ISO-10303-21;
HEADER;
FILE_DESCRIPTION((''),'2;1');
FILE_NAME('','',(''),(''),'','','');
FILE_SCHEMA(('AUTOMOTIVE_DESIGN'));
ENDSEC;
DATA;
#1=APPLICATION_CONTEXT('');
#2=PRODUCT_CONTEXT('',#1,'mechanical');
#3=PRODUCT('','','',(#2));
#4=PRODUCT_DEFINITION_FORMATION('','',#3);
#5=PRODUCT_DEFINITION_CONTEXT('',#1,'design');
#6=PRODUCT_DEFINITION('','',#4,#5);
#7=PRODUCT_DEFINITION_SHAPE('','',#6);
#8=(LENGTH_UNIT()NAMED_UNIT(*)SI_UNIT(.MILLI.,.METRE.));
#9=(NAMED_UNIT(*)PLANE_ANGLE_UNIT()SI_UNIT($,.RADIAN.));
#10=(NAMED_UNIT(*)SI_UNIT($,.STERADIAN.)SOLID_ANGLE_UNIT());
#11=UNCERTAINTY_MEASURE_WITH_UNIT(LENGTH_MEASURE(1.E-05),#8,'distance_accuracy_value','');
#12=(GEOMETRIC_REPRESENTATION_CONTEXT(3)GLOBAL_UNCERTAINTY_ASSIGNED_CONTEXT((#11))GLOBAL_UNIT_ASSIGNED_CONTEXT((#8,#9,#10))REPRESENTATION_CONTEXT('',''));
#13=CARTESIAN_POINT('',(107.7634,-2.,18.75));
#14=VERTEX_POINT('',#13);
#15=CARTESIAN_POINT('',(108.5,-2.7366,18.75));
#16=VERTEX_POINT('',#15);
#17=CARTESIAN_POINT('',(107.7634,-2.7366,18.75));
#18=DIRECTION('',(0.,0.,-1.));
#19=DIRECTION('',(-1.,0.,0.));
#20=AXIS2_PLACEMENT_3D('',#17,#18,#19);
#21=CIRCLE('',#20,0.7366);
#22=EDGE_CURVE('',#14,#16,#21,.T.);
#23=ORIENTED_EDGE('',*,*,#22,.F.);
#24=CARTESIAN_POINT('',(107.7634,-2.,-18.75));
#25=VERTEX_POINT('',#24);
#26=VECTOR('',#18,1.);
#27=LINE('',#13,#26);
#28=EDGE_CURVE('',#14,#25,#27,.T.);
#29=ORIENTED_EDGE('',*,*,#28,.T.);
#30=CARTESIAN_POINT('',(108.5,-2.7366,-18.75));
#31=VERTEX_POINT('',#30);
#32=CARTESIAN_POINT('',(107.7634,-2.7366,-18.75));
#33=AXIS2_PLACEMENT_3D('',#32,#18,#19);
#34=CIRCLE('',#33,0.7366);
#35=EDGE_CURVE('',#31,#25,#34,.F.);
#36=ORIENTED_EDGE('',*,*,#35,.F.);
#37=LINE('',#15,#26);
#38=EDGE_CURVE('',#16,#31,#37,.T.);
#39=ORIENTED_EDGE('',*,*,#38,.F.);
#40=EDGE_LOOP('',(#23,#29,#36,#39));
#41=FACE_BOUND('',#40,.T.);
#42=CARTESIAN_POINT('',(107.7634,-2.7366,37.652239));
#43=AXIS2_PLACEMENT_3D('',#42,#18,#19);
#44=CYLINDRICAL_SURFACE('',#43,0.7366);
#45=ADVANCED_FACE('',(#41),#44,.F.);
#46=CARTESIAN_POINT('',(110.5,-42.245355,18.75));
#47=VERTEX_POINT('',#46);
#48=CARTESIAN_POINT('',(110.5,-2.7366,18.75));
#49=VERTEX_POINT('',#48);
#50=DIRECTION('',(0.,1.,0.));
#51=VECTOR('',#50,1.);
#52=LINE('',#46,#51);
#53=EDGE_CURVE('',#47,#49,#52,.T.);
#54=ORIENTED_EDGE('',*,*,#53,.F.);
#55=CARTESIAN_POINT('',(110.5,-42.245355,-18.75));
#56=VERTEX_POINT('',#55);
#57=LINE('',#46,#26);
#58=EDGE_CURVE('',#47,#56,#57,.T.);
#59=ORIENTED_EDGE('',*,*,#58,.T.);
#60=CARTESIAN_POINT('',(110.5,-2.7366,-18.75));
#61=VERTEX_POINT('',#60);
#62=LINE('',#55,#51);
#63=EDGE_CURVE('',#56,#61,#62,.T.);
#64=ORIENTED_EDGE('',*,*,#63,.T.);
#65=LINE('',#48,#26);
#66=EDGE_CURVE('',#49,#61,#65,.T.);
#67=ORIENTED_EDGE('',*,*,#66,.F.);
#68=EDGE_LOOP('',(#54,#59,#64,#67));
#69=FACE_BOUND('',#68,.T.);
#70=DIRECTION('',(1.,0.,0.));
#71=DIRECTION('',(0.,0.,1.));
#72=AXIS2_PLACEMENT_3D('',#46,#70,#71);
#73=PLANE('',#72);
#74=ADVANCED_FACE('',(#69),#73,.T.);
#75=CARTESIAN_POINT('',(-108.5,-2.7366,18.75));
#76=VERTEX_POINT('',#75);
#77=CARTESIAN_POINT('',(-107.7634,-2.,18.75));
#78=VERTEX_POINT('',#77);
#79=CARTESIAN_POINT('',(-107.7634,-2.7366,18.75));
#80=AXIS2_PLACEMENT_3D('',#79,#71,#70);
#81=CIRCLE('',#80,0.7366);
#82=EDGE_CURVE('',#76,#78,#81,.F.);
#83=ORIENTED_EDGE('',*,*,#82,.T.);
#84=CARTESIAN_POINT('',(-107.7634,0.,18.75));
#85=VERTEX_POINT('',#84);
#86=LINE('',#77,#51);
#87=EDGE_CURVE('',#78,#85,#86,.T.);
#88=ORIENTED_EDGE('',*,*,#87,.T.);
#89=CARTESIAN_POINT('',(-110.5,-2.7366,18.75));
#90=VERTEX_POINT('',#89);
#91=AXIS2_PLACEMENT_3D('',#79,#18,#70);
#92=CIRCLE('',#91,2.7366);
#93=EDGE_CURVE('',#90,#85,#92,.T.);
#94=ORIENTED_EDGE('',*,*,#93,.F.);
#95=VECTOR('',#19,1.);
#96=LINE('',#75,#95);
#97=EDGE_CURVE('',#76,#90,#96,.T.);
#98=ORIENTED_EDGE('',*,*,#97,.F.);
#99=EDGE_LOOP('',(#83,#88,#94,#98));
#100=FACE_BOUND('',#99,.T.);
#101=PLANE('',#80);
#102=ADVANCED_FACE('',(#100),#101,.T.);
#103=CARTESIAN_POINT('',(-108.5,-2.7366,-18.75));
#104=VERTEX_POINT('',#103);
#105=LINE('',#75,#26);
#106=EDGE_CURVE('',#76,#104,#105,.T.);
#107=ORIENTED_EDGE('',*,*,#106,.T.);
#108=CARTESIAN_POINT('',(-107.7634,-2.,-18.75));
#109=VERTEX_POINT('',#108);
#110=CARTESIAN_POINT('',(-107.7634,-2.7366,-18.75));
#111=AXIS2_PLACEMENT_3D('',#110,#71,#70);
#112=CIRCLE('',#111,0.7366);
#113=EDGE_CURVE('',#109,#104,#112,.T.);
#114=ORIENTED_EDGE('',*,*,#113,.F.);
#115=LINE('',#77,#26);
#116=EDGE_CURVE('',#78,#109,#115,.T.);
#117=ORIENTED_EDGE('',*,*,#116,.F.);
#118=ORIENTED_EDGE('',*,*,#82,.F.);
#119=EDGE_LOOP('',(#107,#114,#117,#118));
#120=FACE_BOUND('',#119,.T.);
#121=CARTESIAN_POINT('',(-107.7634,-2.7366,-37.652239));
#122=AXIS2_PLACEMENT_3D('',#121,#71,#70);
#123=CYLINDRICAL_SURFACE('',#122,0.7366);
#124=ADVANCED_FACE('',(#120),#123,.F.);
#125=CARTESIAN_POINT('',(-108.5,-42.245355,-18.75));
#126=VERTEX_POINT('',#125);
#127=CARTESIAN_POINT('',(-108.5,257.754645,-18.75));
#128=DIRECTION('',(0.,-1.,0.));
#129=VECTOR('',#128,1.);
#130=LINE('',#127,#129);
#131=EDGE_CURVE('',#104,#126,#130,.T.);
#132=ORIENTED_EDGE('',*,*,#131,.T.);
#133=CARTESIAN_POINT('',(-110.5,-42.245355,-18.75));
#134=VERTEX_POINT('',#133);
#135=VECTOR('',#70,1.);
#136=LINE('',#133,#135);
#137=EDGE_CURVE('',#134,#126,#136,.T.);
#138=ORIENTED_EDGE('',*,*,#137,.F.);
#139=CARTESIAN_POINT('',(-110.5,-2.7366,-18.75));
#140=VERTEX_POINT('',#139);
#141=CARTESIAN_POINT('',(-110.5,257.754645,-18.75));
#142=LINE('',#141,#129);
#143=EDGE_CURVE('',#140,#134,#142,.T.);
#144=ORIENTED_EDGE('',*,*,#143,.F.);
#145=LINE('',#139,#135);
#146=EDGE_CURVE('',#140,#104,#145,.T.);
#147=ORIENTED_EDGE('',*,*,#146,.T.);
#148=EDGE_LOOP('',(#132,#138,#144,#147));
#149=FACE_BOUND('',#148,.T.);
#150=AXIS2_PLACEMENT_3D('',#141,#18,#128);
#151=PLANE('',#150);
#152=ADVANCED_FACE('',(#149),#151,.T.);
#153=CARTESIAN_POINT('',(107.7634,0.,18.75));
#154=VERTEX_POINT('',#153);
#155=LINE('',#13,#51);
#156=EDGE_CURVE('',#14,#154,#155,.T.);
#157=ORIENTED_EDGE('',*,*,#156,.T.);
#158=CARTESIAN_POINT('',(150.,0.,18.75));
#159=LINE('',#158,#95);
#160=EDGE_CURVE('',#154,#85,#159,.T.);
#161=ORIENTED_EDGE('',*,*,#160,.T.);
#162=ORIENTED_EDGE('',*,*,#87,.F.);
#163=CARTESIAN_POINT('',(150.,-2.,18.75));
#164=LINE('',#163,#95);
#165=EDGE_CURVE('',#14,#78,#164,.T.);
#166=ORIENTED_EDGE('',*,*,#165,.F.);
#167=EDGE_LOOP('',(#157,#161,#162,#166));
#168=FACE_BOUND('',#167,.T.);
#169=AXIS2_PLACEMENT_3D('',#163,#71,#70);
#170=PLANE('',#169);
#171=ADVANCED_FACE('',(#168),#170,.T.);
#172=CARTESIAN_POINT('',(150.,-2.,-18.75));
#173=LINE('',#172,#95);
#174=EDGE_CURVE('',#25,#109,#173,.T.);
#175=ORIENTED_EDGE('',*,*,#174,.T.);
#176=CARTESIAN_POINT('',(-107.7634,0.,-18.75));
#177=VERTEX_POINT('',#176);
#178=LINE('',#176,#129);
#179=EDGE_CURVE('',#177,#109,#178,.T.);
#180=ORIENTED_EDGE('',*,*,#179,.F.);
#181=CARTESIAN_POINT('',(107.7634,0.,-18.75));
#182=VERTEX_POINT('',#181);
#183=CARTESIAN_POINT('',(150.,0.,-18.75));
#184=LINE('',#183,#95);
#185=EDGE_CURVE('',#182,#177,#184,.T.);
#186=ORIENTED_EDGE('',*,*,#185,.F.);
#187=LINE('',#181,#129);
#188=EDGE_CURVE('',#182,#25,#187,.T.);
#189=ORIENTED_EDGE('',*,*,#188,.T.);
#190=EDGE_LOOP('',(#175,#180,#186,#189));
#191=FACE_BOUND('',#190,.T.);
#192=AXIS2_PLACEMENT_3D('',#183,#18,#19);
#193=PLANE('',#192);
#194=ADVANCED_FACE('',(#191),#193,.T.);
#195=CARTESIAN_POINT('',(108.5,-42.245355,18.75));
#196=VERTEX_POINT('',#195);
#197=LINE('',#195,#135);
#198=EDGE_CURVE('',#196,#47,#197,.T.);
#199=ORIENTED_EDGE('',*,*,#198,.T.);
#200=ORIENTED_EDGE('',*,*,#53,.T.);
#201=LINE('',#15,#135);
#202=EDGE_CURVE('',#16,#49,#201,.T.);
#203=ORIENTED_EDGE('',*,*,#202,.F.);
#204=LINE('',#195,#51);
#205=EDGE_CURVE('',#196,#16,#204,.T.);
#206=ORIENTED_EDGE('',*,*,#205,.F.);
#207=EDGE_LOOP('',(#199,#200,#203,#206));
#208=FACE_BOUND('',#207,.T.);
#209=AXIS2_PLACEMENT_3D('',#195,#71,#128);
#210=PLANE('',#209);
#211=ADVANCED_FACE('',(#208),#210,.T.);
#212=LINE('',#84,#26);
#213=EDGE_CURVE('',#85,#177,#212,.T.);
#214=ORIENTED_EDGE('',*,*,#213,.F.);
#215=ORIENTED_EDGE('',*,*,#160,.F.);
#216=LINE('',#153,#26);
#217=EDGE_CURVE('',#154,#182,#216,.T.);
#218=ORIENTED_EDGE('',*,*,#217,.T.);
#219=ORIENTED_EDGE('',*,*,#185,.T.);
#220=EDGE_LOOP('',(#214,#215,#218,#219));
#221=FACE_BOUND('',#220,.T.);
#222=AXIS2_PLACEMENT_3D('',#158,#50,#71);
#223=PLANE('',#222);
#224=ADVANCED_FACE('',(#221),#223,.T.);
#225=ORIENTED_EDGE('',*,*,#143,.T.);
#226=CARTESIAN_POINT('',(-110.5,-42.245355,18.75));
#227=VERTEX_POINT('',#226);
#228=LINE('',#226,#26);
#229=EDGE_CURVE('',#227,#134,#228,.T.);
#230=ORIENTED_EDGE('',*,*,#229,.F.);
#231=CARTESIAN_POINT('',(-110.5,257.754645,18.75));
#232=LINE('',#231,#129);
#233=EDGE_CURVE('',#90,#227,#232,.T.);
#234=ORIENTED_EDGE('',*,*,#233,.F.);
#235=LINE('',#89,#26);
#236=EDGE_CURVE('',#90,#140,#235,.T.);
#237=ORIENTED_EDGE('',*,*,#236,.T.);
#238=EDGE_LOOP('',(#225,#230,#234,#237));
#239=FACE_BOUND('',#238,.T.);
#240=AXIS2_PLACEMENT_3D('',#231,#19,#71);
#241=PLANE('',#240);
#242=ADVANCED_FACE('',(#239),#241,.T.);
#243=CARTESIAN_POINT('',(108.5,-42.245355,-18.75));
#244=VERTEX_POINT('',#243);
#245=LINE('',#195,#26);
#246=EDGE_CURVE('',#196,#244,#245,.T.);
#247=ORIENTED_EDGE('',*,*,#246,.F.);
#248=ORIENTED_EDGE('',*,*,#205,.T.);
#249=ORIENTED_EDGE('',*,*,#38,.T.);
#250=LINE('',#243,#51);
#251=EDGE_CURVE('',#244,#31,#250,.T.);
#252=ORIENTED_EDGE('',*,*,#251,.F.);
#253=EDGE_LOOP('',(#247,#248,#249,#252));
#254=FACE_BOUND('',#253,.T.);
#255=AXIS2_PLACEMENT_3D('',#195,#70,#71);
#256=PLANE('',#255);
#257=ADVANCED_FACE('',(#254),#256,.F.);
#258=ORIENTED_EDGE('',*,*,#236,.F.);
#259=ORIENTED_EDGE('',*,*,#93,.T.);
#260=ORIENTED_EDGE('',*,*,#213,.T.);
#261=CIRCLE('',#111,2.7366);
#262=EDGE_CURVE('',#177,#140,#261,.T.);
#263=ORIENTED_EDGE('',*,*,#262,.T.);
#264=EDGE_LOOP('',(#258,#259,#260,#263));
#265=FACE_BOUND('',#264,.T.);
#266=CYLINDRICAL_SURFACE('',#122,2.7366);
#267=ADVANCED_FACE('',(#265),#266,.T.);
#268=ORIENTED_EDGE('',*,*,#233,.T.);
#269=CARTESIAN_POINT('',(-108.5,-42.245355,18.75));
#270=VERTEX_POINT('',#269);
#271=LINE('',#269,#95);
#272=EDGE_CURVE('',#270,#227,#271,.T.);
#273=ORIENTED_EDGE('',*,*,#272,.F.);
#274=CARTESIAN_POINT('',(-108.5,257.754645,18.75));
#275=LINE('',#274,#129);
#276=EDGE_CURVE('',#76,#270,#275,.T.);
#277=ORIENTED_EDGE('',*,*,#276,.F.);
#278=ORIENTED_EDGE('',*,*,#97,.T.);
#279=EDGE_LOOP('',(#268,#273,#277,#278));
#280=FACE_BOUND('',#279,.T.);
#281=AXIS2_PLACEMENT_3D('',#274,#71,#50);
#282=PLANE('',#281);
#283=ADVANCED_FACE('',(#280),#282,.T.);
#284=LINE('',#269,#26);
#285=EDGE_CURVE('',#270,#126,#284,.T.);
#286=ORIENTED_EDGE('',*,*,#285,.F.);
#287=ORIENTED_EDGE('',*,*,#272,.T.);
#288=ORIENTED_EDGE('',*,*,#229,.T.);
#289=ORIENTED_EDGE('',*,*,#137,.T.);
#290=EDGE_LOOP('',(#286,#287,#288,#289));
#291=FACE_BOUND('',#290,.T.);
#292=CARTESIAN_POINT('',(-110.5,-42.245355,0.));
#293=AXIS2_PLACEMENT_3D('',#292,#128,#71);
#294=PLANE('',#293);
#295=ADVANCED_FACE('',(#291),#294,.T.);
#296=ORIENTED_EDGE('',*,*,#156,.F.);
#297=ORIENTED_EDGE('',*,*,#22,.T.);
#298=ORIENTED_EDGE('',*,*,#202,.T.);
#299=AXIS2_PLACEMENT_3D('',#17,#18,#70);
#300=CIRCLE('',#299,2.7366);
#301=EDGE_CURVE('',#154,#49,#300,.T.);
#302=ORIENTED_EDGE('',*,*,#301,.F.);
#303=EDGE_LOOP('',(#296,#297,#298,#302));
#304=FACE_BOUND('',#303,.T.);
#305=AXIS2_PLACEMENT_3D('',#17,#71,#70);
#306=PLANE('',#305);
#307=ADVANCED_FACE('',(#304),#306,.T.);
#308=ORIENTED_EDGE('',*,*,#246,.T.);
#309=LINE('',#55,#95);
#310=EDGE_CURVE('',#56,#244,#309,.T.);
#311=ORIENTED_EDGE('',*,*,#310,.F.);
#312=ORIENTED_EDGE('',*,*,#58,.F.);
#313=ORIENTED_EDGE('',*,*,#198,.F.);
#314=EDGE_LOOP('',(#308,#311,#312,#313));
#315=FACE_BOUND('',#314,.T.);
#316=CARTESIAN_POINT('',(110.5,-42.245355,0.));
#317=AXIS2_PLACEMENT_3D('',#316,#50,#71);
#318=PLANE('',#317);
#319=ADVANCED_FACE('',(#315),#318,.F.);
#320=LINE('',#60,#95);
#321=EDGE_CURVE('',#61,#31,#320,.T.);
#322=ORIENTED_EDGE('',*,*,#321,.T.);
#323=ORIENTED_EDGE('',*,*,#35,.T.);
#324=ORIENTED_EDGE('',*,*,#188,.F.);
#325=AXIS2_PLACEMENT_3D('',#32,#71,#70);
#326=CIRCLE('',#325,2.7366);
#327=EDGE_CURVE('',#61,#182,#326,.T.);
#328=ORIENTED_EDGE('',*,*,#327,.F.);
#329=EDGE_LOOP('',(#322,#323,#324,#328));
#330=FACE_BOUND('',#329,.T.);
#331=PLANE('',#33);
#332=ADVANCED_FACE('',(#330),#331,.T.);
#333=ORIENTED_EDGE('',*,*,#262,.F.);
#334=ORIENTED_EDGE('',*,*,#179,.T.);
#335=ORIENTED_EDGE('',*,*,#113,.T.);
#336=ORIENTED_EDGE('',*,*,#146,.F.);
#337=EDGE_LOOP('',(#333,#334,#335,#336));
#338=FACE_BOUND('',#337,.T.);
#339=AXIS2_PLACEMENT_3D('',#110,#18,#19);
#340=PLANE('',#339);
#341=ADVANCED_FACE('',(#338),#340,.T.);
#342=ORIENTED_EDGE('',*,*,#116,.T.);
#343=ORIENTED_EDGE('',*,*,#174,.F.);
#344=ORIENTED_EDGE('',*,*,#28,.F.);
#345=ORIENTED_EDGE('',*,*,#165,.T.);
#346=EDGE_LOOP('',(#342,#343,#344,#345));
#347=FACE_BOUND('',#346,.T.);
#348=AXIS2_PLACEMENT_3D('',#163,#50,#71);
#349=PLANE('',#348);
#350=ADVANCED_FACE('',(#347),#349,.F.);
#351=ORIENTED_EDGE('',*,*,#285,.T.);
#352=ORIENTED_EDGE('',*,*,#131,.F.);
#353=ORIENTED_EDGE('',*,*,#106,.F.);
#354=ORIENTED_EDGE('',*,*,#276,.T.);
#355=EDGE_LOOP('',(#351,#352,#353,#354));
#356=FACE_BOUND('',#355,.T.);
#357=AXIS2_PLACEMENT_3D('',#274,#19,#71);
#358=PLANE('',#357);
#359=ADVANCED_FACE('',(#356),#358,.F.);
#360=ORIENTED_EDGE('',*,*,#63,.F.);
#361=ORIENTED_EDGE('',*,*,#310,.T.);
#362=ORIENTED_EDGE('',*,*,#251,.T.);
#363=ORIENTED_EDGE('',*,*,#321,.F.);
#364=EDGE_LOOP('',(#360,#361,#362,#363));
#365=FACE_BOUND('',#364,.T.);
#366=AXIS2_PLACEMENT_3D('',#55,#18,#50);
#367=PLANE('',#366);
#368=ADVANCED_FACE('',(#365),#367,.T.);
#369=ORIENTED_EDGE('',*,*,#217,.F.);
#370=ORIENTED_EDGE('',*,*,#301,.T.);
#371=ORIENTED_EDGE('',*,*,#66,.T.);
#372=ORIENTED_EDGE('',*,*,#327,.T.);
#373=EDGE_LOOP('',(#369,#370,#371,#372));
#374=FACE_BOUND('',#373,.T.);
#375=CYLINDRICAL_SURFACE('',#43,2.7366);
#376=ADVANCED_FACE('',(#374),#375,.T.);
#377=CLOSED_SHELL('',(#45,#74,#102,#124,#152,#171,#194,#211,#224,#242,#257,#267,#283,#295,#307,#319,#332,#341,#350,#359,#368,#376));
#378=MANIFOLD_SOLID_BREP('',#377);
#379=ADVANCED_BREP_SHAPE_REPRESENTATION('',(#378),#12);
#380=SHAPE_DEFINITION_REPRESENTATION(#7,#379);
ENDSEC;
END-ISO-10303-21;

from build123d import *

# Parameters (mm, degrees)
SKETCH_1_W             = 37.5
SKETCH_1_H             = 2
SM_BASE_FLANGE_1_DEPTH = 150
OTHER_START            = -18.75
OTHER_1_DEPTH          = 37.5
OTHER_1_2_DEPTH        = 37.5


# Read off the part's stored shape, not the designer's step: 绘制的折弯1
# Sheet-metal steps are written as plain solids
with BuildPart() as part:
    # Sketch 1 → 基体-法兰1 (new, symmetric)
    with BuildSketch(Plane(origin=(0, 0, 0), x_dir=(0, 0, -1), z_dir=(1, 0, 0))):
        with Locations((0, -1)):
            Rectangle(SKETCH_1_W, SKETCH_1_H)
    extrude(amount=SM_BASE_FLANGE_1_DEPTH, both=True)

    # Other 1 outline → Other 1 (cut)
    with BuildSketch(Plane.XY.offset(OTHER_START)):
        with BuildLine():
            ThreePointArc((-110.399002398, -2), (-109.417667209, -0.556604688), (-107.7634, 0))
            Line((-107.7634, 0), (-150, 0))
            Line((-150, 0), (-150, -2))
            Line((-150, -2), (-110.399002398, -2))
        make_face()
        with BuildLine():
            Line((150, 0), (107.7634, 0))
            ThreePointArc((107.7634, 0), (109.417667209, -0.556604688), (110.399002398, -2))
            Line((110.399002398, -2), (150, -2))
            Line((150, -2), (150, 0))
        make_face()
    extrude(amount=OTHER_1_DEPTH, mode=Mode.SUBTRACT)

    # Other 1 2 outline → Other 1 2 (add)
    with BuildSketch(Plane.XY.offset(OTHER_START)):
        with BuildLine():
            Line((-107.7634, -2), (-110.399002398, -2))
            ThreePointArc((-110.399002398, -2), (-110.474633029, -2.364854094), (-110.5, -2.7366))
            Line((-110.5, -2.7366), (-110.5, -42.245355099))
            Line((-110.5, -42.245355099), (-108.5, -42.245355099))
            Line((-108.5, -42.245355099), (-108.5, -2.7366))
            ThreePointArc((-108.5, -2.7366), (-108.284254855, -2.215745145), (-107.7634, -2))
        make_face()
        with BuildLine():
            ThreePointArc((110.5, -2.7366), (110.474633029, -2.364854094), (110.399002398, -2))
            Line((110.399002398, -2), (107.7634, -2))
            ThreePointArc((107.7634, -2), (108.284254855, -2.215745145), (108.5, -2.7366))
            Line((108.5, -2.7366), (108.5, -42.245355099))
            Line((108.5, -42.245355099), (110.5, -42.245355099))
            Line((110.5, -42.245355099), (110.5, -2.7366))
        make_face()
    extrude(amount=OTHER_1_2_DEPTH)


solid = part.part
